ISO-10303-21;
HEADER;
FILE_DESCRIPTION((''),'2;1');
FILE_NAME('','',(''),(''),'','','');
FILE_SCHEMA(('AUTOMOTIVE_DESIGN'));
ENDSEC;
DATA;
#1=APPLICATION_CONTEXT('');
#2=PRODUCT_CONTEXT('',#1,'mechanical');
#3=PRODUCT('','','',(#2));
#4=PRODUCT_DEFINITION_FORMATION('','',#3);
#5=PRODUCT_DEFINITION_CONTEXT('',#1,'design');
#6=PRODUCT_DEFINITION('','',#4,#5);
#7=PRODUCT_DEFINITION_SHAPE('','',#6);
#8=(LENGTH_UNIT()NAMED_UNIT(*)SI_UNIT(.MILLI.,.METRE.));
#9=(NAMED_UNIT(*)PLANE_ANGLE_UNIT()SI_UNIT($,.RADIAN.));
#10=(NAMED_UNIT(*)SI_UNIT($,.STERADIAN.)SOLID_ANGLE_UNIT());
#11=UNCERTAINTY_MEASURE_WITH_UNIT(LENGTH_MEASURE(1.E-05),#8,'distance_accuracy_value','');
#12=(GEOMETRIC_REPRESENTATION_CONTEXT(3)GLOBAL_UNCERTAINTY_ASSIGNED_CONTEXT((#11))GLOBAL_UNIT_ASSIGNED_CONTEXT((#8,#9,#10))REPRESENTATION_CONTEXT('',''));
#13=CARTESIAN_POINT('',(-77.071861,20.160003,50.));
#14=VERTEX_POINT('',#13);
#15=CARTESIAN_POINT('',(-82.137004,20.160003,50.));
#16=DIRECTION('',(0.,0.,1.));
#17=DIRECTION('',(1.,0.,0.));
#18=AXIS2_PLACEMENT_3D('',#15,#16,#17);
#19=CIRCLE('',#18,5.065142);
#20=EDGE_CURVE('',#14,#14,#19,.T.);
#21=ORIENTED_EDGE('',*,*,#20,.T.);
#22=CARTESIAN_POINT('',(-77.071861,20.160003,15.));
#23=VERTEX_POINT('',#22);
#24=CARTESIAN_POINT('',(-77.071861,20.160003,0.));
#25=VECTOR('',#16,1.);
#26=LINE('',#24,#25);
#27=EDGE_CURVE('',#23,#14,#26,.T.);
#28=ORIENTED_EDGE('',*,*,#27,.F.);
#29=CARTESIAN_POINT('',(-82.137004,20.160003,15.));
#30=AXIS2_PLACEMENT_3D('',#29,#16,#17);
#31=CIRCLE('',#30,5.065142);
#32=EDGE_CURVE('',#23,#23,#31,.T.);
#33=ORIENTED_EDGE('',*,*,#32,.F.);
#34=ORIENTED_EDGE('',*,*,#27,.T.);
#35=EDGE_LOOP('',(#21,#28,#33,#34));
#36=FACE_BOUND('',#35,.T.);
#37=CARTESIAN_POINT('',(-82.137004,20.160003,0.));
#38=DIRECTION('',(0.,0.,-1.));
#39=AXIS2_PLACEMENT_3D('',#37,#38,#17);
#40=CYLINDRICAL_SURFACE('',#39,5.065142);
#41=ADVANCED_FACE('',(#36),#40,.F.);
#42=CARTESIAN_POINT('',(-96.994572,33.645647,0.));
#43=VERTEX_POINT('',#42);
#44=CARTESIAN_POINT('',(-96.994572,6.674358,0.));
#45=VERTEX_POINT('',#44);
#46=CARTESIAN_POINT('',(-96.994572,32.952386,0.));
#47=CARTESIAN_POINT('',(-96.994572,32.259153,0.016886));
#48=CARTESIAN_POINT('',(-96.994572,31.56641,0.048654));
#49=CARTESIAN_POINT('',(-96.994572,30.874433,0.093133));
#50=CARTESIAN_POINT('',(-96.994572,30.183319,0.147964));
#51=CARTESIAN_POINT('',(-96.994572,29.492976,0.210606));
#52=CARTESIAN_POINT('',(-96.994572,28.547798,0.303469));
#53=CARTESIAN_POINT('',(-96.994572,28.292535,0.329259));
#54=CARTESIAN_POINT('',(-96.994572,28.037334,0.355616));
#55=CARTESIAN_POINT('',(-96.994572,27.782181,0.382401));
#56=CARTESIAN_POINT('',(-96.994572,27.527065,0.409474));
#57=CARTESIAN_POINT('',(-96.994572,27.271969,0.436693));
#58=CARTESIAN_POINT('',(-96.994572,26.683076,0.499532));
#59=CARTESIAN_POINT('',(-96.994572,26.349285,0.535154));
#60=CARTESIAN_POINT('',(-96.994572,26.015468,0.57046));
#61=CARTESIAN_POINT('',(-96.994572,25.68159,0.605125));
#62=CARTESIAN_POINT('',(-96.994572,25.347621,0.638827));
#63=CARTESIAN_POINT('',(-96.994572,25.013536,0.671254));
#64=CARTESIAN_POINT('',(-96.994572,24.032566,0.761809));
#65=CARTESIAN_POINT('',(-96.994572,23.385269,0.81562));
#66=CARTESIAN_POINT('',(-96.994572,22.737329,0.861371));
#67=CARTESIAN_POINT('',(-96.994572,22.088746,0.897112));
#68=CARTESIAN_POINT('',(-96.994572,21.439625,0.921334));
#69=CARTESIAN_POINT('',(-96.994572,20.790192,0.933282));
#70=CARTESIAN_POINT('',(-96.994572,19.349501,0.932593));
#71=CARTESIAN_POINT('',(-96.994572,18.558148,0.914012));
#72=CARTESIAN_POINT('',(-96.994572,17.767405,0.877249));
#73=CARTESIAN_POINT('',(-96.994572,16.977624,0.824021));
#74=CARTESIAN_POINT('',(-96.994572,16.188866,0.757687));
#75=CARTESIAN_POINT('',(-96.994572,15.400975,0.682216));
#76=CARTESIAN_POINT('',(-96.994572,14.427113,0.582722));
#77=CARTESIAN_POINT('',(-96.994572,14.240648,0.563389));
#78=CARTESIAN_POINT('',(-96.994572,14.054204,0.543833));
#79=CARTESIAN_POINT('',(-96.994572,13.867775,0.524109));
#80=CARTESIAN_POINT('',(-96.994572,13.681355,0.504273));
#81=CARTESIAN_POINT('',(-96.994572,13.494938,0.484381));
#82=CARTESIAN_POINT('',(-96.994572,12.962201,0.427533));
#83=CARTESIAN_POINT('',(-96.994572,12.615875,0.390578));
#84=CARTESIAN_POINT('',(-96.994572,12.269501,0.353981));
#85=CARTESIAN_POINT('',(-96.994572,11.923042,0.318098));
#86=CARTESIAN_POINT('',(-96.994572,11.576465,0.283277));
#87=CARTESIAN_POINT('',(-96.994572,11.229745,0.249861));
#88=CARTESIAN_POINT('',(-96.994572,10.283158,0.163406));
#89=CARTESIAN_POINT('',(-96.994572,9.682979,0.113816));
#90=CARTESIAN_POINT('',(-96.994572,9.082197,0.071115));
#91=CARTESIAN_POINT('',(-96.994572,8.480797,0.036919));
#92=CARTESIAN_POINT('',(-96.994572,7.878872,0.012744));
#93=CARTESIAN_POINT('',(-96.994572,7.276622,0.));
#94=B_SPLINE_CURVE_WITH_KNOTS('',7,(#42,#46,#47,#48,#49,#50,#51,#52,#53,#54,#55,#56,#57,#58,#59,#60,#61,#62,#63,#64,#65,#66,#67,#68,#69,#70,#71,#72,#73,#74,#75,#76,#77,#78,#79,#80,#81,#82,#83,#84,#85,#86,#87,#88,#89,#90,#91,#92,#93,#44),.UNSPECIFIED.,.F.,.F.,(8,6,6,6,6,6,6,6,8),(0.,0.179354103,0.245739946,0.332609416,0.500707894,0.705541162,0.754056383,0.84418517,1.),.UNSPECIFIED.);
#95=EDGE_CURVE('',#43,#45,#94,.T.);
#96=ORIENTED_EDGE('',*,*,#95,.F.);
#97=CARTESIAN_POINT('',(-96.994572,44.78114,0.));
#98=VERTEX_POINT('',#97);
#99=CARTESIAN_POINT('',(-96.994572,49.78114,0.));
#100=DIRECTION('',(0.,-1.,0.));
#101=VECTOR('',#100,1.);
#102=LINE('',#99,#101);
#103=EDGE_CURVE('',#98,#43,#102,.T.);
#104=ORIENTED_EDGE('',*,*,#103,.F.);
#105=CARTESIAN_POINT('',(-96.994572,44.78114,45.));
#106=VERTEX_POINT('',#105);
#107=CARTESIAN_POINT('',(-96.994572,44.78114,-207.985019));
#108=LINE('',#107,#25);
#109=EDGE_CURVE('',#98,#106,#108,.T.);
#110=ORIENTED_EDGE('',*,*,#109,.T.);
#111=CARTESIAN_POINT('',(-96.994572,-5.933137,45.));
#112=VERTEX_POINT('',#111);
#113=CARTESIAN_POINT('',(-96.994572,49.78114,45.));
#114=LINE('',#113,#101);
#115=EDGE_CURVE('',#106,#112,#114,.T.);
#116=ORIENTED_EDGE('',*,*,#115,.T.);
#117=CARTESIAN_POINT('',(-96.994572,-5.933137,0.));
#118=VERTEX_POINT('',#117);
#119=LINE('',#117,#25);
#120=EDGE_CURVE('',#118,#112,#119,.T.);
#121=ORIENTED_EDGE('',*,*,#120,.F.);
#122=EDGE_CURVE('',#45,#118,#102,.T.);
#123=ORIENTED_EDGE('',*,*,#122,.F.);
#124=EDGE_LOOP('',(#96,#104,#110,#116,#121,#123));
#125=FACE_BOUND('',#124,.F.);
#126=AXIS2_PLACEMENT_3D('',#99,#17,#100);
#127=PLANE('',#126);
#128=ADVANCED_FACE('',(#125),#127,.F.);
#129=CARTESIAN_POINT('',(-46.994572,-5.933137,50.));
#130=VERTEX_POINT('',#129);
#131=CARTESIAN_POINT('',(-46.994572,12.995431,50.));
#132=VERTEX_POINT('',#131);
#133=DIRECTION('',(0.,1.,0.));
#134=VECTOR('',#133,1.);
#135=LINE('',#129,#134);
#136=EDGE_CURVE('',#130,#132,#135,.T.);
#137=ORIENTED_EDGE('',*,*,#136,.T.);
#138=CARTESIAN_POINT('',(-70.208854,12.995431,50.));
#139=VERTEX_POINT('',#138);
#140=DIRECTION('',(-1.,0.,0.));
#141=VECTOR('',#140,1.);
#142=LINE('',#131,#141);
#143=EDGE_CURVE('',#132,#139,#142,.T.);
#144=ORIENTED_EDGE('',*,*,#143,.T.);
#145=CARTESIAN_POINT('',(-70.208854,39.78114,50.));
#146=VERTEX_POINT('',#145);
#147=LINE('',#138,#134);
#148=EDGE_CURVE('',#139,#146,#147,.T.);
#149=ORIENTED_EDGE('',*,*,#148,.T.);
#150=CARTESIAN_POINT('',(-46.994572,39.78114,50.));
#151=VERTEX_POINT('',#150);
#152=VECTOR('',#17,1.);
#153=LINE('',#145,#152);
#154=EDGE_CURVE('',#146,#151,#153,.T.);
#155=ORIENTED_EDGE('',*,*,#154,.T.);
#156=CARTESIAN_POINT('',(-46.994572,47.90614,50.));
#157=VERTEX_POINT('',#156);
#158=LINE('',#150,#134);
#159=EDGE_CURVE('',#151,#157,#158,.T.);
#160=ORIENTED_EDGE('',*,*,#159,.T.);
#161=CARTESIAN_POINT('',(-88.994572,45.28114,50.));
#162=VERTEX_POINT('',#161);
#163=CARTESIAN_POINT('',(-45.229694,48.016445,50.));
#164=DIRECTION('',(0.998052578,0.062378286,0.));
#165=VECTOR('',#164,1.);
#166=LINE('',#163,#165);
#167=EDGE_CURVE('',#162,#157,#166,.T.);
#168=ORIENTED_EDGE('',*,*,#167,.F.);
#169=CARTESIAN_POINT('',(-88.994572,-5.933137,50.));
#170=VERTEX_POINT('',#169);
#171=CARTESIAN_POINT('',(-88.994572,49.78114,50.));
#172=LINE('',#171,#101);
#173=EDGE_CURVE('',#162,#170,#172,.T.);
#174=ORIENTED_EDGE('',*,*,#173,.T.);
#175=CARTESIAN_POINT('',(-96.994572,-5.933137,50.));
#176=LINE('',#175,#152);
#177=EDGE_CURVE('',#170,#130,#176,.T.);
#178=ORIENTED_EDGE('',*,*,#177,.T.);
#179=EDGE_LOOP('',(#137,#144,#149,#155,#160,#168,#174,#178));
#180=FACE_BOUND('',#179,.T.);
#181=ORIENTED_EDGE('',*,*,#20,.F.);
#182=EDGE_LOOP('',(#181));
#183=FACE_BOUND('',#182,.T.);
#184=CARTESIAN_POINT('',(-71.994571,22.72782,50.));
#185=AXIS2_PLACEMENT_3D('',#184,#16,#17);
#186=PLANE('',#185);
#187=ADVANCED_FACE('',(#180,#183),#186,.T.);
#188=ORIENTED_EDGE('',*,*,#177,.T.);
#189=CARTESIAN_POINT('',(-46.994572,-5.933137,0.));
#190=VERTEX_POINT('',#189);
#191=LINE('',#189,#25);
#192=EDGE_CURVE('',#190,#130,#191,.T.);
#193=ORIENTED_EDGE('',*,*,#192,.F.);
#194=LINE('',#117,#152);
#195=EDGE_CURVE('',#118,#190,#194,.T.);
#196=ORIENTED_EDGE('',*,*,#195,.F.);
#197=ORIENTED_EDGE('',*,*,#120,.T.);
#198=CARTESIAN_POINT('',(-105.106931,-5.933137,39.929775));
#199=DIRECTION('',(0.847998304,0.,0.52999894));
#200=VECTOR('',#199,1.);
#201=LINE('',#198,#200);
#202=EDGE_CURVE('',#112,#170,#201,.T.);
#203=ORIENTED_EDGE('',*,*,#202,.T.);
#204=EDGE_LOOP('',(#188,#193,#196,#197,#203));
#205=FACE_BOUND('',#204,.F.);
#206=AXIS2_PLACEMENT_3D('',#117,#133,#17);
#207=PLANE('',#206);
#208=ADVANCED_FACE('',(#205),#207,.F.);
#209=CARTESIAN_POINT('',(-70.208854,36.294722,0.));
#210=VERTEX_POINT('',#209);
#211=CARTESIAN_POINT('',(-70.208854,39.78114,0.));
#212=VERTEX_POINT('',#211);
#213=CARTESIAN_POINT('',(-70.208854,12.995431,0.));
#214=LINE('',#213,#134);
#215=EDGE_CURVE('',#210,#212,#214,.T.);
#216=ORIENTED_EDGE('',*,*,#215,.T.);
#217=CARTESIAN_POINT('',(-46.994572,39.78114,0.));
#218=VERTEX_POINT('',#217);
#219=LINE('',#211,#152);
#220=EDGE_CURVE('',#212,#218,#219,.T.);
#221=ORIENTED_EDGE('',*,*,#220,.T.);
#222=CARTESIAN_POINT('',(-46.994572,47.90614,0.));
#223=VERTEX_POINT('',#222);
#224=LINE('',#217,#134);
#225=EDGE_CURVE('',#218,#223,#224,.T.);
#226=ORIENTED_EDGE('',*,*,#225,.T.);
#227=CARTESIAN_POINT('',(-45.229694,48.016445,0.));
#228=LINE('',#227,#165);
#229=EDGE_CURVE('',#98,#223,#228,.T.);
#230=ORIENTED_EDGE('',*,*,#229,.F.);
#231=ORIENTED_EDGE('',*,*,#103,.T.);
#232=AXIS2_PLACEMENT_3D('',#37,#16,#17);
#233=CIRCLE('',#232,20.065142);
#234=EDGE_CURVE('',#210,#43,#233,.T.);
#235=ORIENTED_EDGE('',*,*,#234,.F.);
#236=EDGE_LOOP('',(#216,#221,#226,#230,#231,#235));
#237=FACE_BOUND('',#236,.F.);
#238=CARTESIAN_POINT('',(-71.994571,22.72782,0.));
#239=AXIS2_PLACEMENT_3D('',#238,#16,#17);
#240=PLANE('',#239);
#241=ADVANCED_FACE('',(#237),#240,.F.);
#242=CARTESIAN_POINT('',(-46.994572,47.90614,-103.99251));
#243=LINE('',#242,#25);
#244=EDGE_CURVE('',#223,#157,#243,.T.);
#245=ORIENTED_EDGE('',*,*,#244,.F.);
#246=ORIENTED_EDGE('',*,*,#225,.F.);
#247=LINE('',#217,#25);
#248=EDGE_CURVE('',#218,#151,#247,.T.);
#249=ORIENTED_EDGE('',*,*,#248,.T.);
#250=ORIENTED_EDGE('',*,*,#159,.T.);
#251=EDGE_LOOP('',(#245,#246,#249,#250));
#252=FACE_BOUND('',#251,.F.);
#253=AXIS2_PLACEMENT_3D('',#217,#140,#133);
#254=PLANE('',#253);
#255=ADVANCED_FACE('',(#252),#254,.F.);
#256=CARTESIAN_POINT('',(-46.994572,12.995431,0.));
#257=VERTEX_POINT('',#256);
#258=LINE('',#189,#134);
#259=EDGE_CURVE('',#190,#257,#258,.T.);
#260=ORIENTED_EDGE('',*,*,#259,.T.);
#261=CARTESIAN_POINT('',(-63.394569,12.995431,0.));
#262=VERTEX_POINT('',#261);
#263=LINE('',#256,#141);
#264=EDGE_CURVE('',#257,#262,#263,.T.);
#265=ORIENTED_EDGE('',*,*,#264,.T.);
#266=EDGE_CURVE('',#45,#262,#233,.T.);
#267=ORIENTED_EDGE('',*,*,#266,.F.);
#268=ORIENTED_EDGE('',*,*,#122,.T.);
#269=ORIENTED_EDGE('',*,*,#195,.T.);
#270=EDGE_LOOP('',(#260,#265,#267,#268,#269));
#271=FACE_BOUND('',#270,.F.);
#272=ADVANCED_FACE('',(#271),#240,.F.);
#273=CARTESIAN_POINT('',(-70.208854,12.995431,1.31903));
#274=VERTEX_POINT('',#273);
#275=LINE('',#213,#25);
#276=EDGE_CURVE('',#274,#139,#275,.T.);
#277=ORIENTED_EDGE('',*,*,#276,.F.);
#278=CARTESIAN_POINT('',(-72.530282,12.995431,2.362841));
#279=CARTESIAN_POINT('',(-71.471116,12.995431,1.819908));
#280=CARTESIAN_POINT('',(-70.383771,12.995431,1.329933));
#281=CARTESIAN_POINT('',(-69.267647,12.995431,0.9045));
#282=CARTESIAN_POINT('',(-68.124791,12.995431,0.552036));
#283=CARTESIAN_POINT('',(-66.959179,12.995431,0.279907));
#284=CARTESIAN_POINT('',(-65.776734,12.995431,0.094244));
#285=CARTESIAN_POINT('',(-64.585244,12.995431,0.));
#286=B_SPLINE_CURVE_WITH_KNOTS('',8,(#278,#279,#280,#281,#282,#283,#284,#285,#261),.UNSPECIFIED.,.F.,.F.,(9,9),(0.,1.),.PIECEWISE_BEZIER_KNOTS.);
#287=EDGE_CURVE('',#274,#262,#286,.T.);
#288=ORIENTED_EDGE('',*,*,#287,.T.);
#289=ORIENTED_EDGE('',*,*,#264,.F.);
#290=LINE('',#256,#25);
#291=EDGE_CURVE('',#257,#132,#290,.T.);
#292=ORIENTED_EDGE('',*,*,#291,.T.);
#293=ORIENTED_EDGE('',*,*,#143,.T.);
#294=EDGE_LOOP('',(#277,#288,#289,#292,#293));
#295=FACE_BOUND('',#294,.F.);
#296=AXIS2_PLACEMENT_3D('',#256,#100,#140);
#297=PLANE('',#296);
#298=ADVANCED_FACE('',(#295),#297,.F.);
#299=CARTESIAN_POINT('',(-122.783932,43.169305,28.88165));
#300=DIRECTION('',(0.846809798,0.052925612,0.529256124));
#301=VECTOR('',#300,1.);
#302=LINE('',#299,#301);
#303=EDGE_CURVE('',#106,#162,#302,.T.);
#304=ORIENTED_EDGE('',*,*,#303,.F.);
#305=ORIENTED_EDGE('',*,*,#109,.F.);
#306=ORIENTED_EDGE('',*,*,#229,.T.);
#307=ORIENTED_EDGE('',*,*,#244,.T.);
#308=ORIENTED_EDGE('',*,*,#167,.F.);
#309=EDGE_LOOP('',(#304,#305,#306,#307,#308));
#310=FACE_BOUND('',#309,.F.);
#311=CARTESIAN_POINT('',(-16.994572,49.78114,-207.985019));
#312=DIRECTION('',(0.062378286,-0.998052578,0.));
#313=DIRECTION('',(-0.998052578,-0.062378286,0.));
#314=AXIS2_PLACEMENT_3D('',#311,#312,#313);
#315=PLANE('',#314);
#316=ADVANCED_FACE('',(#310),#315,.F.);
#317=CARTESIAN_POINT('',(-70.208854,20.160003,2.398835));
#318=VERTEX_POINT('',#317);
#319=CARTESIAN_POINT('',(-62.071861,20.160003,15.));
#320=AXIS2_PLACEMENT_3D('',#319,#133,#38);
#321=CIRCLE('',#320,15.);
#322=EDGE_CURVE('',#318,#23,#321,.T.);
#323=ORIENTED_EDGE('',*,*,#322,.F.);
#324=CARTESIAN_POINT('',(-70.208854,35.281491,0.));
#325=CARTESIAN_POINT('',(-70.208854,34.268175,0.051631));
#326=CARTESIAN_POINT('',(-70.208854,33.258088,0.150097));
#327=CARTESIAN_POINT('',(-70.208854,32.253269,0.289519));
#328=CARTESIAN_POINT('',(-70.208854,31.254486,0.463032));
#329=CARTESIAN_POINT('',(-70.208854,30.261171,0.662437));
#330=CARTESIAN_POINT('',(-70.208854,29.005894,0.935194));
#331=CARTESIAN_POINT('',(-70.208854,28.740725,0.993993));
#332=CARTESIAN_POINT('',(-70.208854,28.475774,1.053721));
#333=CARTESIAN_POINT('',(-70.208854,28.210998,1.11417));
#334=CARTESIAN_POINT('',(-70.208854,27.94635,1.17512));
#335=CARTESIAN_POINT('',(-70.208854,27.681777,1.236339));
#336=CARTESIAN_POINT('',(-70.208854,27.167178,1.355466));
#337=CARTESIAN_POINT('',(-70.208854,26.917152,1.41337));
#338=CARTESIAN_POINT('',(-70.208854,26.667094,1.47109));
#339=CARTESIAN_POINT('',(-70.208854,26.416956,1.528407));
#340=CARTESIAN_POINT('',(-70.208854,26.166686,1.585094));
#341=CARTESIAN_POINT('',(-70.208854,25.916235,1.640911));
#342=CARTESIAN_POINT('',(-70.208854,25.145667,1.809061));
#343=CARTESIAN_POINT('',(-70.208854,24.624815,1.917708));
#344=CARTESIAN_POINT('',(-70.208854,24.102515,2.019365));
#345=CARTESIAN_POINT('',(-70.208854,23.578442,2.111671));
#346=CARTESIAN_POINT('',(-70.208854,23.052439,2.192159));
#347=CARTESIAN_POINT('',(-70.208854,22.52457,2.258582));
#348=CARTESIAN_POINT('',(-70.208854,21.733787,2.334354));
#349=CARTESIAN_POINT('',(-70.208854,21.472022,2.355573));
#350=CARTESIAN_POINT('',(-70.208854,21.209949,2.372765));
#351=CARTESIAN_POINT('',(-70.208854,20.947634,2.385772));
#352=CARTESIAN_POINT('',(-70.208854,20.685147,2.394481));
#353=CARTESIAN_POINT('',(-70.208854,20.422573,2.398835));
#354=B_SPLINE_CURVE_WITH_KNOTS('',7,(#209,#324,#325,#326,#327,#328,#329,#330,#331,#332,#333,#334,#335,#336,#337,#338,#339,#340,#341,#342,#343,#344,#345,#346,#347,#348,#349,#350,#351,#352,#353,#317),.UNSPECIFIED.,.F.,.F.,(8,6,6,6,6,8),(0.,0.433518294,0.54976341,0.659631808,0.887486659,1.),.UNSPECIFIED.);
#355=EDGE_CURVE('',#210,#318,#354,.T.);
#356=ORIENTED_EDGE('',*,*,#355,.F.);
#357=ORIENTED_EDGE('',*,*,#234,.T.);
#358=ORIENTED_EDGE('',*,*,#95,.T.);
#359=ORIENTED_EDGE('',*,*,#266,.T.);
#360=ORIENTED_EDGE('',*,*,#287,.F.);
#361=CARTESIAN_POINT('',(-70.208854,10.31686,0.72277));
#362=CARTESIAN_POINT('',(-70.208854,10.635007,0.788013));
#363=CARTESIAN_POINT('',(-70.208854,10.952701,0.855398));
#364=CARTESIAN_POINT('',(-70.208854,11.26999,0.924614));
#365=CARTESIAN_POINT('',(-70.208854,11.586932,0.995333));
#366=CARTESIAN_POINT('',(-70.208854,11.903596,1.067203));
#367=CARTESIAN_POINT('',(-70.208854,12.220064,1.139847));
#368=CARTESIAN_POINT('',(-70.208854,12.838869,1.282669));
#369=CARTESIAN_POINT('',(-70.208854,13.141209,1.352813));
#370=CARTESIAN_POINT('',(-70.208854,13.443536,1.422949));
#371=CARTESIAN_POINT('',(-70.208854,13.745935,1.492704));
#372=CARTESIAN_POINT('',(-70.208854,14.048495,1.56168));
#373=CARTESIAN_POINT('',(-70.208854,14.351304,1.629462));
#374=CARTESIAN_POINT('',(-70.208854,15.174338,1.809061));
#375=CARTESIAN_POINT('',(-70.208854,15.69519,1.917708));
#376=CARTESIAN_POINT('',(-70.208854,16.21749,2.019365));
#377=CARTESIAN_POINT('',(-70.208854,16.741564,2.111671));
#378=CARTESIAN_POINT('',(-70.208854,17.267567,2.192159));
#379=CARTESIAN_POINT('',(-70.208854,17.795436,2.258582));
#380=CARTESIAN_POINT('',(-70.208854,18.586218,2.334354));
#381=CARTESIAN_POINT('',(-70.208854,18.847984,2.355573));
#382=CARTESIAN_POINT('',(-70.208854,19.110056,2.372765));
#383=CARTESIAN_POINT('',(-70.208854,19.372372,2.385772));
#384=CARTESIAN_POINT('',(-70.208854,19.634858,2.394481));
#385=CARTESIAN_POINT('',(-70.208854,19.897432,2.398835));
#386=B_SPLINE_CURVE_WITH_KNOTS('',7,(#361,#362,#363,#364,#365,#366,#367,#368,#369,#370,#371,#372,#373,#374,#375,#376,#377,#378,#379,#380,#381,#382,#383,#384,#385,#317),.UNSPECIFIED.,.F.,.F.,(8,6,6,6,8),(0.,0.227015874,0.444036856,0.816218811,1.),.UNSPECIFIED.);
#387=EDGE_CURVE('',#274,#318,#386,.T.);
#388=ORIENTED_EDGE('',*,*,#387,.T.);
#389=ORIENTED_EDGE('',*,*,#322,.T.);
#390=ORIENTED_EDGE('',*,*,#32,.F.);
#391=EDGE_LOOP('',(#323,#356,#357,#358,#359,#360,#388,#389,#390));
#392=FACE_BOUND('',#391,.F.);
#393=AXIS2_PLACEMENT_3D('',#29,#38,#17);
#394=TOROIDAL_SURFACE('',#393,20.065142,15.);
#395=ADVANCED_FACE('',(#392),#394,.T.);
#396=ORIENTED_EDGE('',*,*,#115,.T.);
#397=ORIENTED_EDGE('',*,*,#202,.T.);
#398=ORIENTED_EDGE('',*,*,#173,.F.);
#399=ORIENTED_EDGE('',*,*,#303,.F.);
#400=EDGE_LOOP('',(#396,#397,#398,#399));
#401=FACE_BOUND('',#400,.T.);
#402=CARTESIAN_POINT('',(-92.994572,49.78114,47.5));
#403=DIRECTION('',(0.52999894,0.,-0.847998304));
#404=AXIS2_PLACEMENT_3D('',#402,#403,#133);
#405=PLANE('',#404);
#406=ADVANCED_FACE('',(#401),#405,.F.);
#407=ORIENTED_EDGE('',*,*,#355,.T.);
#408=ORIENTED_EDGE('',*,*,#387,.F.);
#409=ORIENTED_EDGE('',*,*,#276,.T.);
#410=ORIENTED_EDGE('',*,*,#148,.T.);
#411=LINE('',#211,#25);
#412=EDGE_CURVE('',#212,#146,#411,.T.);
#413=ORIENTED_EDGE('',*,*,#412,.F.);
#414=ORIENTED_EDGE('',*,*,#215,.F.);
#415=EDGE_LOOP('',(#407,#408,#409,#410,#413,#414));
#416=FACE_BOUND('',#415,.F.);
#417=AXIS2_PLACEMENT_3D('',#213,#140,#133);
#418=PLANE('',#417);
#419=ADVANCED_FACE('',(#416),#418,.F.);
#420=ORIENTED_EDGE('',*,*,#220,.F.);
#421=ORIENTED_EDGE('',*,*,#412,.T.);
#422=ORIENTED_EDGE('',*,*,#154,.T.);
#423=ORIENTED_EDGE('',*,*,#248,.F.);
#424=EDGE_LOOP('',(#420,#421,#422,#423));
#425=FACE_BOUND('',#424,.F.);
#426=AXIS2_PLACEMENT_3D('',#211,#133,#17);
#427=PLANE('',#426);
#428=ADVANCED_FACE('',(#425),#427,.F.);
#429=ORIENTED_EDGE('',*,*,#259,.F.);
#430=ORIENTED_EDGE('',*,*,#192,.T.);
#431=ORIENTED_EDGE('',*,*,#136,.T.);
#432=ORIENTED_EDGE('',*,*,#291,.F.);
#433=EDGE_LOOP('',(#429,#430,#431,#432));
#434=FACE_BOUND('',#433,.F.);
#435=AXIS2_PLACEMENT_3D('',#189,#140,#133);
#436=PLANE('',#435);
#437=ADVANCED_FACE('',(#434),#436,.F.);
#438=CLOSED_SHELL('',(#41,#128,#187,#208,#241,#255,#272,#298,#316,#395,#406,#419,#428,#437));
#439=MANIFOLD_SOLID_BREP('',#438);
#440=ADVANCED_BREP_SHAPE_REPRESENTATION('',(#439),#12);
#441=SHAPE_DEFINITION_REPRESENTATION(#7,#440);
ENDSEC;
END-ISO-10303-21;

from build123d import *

# Parameters (mm, degrees)
F0_R        = 5.0651423349
F1_DEPTH    = 50
F2_SIZE2    = 8
F2_SIZE     = 5
F4_T1_DEPTH = 460.97003859


# Not quite as in the source:
# - a fillet or chamfer that OpenCascade refuses, or shapes differently, is made with other operations: its cross-section is extruded or revolved along the edge and cut away or added


with BuildPart() as f1:
    # F0 (on Top) → F1 (new body)
    with BuildSketch(Plane.XY):
        Polygon((-70.2088537009, 12.9954309589), (-70.2088537009, 39.781139965), (-46.9945719463, 39.781139965), (-46.9945719463, 49.781139965), (-96.9945719463, 49.781139965), (-96.9945719463, -5.9331371699), (-46.9945719463, -5.9331371699), (-46.9945719463, 12.9954309589), align=None)
        with Locations((-82.137003541, 20.1600026339)):
            Circle(F0_R, mode=Mode.SUBTRACT)
    extrude(amount=F1_DEPTH)

    # F2
    f2_edges = [f1.edges().sort_by_distance(p)[0] for p in [
        (-96.994572, 21.924001, 50),
    ]]
    f2_side = f1.faces().sort_by_distance((-96.994572, 21.924001, 25))[0]
    chamfer(f2_edges, length=F2_SIZE, length2=F2_SIZE2, reference=f2_side)

    # F3: fillet of radius 15 on 1 edges, made by hand

    # F3_s1 → F3_t2 (revolve, cut)
    with BuildSketch(Plane.XZ.offset(-20.1600026339)):
        with BuildLine():
            ThreePointArc((-62.0718612061, 0), (-72.6784629239, 4.3933982822), (-77.0718612061, 15))
            Line((-77.0718612061, 15), (-77.0718612061, 0))
            Line((-77.0718612061, 0), (-62.0718612061, 0))
        make_face()
    revolve(axis=Axis((-82.137003541, 20.1600026339, 0), (0, 0, 1)), mode=Mode.SUBTRACT)

    # F4: chamfer of 5 x 80 on 1 edges, made by hand

    # F4_s2 → F4_t1 (cut)
    with BuildSketch(Plane.XY.offset(-207.985019295)):
        Polygon((-16.9945719463, 49.781139965), (-96.9945719463, 44.781139965), (-96.9945719463, 49.781139965), align=None)
    extrude(amount=F4_T1_DEPTH, mode=Mode.SUBTRACT)


solid = f1.part
